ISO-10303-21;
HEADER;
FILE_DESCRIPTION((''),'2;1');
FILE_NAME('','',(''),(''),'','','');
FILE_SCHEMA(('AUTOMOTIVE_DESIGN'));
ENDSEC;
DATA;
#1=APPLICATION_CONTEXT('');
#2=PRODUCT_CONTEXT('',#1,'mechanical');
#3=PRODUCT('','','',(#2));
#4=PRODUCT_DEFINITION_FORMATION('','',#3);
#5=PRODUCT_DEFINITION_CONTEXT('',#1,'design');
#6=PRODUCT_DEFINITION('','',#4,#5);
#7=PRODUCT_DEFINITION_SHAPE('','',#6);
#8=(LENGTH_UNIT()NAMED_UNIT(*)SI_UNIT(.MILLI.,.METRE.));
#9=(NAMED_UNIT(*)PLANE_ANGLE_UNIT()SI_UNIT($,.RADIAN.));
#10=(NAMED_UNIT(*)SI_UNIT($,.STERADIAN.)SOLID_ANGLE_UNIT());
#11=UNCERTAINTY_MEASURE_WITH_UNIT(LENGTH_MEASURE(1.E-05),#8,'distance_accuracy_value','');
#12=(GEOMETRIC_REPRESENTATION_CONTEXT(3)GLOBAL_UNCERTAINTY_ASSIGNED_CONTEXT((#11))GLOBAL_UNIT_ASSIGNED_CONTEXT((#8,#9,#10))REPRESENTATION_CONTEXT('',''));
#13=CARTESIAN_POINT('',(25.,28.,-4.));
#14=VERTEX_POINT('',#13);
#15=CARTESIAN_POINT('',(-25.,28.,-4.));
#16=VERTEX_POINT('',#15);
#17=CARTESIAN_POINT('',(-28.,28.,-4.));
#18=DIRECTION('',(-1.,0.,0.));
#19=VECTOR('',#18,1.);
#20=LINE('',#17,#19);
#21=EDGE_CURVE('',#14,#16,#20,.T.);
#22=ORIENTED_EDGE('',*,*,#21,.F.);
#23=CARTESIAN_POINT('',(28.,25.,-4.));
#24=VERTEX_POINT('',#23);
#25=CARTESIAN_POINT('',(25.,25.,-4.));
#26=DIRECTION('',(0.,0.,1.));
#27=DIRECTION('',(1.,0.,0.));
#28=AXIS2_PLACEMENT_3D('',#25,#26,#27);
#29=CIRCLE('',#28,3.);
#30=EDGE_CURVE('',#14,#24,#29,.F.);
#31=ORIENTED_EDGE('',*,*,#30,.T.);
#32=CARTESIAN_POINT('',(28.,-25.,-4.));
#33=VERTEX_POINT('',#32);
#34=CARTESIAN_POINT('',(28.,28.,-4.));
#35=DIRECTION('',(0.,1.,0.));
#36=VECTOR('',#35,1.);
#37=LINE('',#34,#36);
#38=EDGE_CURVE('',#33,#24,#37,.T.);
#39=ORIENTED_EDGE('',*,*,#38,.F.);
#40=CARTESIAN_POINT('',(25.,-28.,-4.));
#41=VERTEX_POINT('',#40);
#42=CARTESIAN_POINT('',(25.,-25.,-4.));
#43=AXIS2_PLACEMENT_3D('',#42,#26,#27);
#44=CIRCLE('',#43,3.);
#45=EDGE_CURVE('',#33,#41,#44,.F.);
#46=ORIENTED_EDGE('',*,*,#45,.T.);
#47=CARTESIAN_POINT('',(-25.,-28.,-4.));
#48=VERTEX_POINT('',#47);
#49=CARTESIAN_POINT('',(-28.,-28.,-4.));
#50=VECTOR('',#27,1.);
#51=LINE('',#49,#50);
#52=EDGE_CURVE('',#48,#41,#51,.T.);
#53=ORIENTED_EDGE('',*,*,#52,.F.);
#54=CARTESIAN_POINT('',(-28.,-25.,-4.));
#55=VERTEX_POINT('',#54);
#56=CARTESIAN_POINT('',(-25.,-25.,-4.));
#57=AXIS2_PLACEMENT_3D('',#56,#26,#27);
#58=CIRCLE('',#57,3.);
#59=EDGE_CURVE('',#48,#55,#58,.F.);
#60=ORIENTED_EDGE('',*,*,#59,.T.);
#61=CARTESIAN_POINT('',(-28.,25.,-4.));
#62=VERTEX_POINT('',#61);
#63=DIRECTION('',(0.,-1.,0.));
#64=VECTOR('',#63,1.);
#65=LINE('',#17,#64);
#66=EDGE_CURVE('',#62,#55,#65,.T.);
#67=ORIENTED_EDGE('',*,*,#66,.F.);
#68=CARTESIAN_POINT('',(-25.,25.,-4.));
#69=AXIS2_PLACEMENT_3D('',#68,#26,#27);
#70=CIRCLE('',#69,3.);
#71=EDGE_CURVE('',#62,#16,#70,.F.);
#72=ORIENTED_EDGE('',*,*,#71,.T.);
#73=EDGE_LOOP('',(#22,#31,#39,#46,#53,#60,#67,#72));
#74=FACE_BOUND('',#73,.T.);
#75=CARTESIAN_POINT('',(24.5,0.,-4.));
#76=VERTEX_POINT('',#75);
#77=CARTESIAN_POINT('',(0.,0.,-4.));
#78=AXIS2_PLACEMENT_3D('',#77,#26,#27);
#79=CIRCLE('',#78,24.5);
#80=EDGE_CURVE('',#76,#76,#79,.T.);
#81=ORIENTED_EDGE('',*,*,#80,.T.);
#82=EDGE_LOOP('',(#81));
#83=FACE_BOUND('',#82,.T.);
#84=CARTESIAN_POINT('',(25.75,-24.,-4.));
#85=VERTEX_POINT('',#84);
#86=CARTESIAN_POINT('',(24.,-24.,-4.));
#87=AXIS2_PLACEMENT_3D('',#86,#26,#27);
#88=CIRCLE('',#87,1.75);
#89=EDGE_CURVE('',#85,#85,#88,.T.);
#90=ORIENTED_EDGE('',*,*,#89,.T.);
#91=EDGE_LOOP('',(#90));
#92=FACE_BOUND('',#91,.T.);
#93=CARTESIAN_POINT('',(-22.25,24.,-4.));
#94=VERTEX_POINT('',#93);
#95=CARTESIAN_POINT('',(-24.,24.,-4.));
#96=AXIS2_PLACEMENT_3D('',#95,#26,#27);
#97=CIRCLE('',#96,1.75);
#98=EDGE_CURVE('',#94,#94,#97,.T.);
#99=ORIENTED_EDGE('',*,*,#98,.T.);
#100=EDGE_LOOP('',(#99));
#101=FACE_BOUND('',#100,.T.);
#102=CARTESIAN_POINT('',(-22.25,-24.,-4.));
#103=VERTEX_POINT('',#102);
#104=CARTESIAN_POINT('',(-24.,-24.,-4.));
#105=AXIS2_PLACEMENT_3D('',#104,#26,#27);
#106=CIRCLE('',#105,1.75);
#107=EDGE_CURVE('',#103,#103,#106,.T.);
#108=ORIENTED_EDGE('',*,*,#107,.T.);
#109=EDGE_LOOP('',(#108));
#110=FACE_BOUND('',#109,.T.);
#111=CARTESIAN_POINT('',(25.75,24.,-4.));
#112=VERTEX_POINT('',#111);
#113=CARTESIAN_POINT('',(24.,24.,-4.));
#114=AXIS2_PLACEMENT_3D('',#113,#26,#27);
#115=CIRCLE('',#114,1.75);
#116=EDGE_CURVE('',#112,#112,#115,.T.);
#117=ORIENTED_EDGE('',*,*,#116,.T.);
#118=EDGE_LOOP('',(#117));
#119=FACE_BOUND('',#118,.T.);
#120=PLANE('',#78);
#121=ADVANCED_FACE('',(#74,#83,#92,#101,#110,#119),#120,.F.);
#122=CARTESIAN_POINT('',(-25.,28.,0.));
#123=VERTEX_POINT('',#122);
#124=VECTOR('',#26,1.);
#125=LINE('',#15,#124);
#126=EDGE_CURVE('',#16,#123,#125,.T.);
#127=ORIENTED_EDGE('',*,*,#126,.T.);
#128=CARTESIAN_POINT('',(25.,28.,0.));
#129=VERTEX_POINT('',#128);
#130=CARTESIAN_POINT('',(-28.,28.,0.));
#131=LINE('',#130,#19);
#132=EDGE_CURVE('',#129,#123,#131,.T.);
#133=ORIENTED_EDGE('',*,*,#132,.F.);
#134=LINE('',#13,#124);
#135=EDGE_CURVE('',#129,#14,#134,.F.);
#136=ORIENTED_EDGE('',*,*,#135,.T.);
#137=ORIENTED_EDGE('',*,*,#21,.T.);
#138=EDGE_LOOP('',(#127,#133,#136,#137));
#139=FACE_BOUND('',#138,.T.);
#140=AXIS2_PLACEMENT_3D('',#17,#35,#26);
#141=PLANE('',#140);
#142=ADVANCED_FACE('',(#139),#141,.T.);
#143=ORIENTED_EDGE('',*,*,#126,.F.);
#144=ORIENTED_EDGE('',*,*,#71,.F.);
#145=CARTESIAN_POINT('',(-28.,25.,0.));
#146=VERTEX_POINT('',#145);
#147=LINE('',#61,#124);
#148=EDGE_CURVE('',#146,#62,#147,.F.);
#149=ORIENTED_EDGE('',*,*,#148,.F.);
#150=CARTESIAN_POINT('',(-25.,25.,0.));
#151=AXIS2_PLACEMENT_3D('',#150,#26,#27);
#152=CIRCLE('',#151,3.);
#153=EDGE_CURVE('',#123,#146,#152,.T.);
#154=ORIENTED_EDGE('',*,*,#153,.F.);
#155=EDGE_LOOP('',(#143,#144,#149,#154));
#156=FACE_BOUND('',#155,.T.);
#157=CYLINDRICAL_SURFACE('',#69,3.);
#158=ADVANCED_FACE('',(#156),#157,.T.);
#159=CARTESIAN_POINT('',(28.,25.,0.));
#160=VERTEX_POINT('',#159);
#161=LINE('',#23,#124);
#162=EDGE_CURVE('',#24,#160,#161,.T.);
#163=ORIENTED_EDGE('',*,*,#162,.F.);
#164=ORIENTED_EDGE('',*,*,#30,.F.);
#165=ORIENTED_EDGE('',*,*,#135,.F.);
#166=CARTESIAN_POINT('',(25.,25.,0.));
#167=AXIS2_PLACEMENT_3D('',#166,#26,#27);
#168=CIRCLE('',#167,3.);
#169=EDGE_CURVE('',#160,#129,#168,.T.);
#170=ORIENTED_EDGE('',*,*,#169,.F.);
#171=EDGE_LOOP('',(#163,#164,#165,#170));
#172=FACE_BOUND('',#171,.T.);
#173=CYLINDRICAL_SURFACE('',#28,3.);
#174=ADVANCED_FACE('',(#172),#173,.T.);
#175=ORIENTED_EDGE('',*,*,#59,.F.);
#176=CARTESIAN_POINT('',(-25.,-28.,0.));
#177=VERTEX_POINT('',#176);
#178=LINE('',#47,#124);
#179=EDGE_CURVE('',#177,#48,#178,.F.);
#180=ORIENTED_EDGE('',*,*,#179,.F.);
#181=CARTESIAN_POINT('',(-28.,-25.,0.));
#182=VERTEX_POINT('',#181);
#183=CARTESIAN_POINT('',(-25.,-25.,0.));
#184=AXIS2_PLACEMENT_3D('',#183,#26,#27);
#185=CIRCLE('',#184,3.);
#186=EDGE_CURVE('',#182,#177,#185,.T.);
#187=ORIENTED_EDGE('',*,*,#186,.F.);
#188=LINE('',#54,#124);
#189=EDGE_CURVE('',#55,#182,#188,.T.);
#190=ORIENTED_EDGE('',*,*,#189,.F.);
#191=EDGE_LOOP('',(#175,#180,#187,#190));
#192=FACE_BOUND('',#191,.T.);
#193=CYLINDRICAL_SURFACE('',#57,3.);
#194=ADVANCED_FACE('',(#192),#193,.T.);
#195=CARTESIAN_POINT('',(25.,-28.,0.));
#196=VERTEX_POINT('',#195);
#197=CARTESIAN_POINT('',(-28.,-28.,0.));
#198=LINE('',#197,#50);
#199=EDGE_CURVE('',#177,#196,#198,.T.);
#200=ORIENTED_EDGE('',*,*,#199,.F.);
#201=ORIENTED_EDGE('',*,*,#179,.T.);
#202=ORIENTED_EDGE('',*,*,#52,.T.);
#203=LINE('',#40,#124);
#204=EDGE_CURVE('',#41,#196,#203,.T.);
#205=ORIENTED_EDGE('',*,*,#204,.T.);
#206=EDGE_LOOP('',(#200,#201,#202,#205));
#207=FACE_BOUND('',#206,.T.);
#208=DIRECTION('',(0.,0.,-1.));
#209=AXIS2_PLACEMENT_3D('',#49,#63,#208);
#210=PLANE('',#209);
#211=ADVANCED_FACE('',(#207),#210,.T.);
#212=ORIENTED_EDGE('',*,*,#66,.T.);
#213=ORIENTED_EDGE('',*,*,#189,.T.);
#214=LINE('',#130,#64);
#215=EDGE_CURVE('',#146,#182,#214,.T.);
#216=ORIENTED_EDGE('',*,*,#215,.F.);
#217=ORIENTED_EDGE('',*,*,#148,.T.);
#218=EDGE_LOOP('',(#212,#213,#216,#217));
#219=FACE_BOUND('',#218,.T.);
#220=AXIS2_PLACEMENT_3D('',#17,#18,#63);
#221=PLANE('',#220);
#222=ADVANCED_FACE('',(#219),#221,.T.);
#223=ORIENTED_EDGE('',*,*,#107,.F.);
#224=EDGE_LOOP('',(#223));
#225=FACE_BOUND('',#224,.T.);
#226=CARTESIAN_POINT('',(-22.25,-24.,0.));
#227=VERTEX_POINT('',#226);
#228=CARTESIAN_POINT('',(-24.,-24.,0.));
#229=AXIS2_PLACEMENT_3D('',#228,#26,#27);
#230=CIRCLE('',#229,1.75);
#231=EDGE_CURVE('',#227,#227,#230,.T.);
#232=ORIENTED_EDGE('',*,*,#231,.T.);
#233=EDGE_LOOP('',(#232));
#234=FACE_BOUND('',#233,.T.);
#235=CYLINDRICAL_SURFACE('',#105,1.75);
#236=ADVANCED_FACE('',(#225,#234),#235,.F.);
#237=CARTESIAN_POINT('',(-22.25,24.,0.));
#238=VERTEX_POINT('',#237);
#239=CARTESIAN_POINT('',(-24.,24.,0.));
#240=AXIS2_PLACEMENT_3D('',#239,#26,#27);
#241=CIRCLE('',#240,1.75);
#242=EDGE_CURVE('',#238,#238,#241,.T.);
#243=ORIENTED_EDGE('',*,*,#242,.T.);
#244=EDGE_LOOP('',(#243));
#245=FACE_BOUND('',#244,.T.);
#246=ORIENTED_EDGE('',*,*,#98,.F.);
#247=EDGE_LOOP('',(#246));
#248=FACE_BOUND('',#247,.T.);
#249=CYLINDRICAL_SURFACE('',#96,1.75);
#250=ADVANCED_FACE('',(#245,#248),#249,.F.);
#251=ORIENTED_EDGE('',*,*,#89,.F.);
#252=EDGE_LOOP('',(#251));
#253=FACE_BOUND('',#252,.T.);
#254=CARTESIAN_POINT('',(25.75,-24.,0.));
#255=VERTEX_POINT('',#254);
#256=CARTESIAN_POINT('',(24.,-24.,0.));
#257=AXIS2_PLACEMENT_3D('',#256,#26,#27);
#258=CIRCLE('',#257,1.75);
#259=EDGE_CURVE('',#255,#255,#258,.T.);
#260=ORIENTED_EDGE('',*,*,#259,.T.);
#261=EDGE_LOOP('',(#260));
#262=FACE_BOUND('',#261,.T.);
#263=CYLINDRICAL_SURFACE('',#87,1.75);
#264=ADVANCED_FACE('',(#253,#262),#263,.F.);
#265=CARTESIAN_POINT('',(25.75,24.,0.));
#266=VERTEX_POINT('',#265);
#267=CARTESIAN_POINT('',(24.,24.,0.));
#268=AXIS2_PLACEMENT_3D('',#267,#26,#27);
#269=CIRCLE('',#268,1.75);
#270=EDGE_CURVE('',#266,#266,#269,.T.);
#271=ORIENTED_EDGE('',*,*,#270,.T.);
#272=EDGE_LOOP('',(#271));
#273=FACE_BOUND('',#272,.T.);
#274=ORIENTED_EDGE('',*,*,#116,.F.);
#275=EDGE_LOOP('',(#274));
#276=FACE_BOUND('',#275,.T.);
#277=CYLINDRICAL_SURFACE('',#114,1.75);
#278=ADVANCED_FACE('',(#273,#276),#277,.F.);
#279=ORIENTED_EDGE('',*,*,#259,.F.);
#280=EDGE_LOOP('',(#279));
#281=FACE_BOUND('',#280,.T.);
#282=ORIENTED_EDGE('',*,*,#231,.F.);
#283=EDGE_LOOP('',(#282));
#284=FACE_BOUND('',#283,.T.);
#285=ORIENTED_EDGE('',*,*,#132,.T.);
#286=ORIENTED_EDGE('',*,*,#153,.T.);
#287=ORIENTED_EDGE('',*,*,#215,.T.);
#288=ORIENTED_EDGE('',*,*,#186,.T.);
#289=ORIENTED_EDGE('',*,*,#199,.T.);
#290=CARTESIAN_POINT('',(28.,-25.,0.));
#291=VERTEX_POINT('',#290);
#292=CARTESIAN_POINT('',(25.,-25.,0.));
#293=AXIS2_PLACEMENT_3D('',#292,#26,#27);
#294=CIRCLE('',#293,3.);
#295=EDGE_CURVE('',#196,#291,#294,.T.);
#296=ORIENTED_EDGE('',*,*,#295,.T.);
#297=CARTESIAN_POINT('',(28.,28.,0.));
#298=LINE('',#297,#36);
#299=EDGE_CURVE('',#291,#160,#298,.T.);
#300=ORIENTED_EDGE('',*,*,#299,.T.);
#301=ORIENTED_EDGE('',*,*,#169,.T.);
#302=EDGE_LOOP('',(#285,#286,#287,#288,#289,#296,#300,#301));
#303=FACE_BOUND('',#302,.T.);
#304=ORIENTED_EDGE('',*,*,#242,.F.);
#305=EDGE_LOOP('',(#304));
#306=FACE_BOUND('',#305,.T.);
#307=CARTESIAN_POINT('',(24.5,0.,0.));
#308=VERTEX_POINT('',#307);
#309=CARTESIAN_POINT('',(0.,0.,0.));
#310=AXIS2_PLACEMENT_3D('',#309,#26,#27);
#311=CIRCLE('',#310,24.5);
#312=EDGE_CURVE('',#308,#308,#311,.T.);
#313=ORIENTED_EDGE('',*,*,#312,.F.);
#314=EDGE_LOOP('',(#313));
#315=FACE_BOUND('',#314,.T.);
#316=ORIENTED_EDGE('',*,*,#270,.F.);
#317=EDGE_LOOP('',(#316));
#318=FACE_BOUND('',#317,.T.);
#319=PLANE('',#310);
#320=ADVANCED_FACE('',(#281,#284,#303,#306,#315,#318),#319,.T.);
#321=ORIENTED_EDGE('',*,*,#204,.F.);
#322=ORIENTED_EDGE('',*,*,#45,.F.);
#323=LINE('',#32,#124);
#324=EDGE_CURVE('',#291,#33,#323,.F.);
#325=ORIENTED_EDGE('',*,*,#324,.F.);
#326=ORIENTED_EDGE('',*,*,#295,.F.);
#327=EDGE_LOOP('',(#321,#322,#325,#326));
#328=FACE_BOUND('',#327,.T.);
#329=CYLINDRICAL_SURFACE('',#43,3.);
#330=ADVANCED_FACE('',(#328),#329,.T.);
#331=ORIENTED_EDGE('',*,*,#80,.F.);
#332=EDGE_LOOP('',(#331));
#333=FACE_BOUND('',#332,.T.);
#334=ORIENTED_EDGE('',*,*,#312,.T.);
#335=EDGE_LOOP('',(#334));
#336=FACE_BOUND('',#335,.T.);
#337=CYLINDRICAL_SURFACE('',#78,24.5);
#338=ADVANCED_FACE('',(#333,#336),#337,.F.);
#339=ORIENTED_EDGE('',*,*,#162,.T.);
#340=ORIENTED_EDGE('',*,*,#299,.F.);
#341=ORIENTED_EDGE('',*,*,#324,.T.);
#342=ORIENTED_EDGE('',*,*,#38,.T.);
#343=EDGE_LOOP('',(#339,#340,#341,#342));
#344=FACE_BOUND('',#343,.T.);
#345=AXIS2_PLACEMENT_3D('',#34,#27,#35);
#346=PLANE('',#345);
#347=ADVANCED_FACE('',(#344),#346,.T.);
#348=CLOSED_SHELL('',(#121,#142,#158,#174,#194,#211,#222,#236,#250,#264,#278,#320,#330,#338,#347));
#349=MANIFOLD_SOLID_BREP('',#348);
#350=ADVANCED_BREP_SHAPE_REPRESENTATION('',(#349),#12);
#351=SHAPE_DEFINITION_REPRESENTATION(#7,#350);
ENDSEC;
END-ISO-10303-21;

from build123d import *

# Parameters (mm, degrees)
SKETCH_1_W             = 56
SKETCH_1_H             = 56
SM_BASE_FLANGE_1_DEPTH = 4
SKETCH_6_R             = 24.5
SKETCH_6_R_2           = 1.75
CUT_EXTRUDE_1_DEPTH    = 4
FILLET_1_R             = 3


# Sheet-metal steps are written as plain solids
with BuildPart() as part:
    # Sketch 1 → Базовая кромка1 (new body)
    with BuildSketch(Plane.XY):
        Rectangle(SKETCH_1_W, SKETCH_1_H)
    extrude(amount=-SM_BASE_FLANGE_1_DEPTH)

    # Эскиз6 → Вырез-Вытянуть1 (cut)
    with BuildSketch(Plane.XY):
        Circle(SKETCH_6_R)
        with Locations((-24, 24)):
            Circle(SKETCH_6_R_2)
        with Locations((24, 24)):
            Circle(SKETCH_6_R_2)
        with Locations((24, -24)):
            Circle(SKETCH_6_R_2)
        with Locations((-24, -24)):
            Circle(SKETCH_6_R_2)
    extrude(amount=-CUT_EXTRUDE_1_DEPTH, mode=Mode.SUBTRACT)

    # Скругление1
    fillet_1_edges = [part.edges().sort_by_distance(p)[0] for p in [
        (28, -28, -2),
        (-28, -28, -2),
        (-28, 28, -2),
        (28, 28, -2),
    ]]
    fillet(fillet_1_edges, radius=FILLET_1_R)


solid = part.part
